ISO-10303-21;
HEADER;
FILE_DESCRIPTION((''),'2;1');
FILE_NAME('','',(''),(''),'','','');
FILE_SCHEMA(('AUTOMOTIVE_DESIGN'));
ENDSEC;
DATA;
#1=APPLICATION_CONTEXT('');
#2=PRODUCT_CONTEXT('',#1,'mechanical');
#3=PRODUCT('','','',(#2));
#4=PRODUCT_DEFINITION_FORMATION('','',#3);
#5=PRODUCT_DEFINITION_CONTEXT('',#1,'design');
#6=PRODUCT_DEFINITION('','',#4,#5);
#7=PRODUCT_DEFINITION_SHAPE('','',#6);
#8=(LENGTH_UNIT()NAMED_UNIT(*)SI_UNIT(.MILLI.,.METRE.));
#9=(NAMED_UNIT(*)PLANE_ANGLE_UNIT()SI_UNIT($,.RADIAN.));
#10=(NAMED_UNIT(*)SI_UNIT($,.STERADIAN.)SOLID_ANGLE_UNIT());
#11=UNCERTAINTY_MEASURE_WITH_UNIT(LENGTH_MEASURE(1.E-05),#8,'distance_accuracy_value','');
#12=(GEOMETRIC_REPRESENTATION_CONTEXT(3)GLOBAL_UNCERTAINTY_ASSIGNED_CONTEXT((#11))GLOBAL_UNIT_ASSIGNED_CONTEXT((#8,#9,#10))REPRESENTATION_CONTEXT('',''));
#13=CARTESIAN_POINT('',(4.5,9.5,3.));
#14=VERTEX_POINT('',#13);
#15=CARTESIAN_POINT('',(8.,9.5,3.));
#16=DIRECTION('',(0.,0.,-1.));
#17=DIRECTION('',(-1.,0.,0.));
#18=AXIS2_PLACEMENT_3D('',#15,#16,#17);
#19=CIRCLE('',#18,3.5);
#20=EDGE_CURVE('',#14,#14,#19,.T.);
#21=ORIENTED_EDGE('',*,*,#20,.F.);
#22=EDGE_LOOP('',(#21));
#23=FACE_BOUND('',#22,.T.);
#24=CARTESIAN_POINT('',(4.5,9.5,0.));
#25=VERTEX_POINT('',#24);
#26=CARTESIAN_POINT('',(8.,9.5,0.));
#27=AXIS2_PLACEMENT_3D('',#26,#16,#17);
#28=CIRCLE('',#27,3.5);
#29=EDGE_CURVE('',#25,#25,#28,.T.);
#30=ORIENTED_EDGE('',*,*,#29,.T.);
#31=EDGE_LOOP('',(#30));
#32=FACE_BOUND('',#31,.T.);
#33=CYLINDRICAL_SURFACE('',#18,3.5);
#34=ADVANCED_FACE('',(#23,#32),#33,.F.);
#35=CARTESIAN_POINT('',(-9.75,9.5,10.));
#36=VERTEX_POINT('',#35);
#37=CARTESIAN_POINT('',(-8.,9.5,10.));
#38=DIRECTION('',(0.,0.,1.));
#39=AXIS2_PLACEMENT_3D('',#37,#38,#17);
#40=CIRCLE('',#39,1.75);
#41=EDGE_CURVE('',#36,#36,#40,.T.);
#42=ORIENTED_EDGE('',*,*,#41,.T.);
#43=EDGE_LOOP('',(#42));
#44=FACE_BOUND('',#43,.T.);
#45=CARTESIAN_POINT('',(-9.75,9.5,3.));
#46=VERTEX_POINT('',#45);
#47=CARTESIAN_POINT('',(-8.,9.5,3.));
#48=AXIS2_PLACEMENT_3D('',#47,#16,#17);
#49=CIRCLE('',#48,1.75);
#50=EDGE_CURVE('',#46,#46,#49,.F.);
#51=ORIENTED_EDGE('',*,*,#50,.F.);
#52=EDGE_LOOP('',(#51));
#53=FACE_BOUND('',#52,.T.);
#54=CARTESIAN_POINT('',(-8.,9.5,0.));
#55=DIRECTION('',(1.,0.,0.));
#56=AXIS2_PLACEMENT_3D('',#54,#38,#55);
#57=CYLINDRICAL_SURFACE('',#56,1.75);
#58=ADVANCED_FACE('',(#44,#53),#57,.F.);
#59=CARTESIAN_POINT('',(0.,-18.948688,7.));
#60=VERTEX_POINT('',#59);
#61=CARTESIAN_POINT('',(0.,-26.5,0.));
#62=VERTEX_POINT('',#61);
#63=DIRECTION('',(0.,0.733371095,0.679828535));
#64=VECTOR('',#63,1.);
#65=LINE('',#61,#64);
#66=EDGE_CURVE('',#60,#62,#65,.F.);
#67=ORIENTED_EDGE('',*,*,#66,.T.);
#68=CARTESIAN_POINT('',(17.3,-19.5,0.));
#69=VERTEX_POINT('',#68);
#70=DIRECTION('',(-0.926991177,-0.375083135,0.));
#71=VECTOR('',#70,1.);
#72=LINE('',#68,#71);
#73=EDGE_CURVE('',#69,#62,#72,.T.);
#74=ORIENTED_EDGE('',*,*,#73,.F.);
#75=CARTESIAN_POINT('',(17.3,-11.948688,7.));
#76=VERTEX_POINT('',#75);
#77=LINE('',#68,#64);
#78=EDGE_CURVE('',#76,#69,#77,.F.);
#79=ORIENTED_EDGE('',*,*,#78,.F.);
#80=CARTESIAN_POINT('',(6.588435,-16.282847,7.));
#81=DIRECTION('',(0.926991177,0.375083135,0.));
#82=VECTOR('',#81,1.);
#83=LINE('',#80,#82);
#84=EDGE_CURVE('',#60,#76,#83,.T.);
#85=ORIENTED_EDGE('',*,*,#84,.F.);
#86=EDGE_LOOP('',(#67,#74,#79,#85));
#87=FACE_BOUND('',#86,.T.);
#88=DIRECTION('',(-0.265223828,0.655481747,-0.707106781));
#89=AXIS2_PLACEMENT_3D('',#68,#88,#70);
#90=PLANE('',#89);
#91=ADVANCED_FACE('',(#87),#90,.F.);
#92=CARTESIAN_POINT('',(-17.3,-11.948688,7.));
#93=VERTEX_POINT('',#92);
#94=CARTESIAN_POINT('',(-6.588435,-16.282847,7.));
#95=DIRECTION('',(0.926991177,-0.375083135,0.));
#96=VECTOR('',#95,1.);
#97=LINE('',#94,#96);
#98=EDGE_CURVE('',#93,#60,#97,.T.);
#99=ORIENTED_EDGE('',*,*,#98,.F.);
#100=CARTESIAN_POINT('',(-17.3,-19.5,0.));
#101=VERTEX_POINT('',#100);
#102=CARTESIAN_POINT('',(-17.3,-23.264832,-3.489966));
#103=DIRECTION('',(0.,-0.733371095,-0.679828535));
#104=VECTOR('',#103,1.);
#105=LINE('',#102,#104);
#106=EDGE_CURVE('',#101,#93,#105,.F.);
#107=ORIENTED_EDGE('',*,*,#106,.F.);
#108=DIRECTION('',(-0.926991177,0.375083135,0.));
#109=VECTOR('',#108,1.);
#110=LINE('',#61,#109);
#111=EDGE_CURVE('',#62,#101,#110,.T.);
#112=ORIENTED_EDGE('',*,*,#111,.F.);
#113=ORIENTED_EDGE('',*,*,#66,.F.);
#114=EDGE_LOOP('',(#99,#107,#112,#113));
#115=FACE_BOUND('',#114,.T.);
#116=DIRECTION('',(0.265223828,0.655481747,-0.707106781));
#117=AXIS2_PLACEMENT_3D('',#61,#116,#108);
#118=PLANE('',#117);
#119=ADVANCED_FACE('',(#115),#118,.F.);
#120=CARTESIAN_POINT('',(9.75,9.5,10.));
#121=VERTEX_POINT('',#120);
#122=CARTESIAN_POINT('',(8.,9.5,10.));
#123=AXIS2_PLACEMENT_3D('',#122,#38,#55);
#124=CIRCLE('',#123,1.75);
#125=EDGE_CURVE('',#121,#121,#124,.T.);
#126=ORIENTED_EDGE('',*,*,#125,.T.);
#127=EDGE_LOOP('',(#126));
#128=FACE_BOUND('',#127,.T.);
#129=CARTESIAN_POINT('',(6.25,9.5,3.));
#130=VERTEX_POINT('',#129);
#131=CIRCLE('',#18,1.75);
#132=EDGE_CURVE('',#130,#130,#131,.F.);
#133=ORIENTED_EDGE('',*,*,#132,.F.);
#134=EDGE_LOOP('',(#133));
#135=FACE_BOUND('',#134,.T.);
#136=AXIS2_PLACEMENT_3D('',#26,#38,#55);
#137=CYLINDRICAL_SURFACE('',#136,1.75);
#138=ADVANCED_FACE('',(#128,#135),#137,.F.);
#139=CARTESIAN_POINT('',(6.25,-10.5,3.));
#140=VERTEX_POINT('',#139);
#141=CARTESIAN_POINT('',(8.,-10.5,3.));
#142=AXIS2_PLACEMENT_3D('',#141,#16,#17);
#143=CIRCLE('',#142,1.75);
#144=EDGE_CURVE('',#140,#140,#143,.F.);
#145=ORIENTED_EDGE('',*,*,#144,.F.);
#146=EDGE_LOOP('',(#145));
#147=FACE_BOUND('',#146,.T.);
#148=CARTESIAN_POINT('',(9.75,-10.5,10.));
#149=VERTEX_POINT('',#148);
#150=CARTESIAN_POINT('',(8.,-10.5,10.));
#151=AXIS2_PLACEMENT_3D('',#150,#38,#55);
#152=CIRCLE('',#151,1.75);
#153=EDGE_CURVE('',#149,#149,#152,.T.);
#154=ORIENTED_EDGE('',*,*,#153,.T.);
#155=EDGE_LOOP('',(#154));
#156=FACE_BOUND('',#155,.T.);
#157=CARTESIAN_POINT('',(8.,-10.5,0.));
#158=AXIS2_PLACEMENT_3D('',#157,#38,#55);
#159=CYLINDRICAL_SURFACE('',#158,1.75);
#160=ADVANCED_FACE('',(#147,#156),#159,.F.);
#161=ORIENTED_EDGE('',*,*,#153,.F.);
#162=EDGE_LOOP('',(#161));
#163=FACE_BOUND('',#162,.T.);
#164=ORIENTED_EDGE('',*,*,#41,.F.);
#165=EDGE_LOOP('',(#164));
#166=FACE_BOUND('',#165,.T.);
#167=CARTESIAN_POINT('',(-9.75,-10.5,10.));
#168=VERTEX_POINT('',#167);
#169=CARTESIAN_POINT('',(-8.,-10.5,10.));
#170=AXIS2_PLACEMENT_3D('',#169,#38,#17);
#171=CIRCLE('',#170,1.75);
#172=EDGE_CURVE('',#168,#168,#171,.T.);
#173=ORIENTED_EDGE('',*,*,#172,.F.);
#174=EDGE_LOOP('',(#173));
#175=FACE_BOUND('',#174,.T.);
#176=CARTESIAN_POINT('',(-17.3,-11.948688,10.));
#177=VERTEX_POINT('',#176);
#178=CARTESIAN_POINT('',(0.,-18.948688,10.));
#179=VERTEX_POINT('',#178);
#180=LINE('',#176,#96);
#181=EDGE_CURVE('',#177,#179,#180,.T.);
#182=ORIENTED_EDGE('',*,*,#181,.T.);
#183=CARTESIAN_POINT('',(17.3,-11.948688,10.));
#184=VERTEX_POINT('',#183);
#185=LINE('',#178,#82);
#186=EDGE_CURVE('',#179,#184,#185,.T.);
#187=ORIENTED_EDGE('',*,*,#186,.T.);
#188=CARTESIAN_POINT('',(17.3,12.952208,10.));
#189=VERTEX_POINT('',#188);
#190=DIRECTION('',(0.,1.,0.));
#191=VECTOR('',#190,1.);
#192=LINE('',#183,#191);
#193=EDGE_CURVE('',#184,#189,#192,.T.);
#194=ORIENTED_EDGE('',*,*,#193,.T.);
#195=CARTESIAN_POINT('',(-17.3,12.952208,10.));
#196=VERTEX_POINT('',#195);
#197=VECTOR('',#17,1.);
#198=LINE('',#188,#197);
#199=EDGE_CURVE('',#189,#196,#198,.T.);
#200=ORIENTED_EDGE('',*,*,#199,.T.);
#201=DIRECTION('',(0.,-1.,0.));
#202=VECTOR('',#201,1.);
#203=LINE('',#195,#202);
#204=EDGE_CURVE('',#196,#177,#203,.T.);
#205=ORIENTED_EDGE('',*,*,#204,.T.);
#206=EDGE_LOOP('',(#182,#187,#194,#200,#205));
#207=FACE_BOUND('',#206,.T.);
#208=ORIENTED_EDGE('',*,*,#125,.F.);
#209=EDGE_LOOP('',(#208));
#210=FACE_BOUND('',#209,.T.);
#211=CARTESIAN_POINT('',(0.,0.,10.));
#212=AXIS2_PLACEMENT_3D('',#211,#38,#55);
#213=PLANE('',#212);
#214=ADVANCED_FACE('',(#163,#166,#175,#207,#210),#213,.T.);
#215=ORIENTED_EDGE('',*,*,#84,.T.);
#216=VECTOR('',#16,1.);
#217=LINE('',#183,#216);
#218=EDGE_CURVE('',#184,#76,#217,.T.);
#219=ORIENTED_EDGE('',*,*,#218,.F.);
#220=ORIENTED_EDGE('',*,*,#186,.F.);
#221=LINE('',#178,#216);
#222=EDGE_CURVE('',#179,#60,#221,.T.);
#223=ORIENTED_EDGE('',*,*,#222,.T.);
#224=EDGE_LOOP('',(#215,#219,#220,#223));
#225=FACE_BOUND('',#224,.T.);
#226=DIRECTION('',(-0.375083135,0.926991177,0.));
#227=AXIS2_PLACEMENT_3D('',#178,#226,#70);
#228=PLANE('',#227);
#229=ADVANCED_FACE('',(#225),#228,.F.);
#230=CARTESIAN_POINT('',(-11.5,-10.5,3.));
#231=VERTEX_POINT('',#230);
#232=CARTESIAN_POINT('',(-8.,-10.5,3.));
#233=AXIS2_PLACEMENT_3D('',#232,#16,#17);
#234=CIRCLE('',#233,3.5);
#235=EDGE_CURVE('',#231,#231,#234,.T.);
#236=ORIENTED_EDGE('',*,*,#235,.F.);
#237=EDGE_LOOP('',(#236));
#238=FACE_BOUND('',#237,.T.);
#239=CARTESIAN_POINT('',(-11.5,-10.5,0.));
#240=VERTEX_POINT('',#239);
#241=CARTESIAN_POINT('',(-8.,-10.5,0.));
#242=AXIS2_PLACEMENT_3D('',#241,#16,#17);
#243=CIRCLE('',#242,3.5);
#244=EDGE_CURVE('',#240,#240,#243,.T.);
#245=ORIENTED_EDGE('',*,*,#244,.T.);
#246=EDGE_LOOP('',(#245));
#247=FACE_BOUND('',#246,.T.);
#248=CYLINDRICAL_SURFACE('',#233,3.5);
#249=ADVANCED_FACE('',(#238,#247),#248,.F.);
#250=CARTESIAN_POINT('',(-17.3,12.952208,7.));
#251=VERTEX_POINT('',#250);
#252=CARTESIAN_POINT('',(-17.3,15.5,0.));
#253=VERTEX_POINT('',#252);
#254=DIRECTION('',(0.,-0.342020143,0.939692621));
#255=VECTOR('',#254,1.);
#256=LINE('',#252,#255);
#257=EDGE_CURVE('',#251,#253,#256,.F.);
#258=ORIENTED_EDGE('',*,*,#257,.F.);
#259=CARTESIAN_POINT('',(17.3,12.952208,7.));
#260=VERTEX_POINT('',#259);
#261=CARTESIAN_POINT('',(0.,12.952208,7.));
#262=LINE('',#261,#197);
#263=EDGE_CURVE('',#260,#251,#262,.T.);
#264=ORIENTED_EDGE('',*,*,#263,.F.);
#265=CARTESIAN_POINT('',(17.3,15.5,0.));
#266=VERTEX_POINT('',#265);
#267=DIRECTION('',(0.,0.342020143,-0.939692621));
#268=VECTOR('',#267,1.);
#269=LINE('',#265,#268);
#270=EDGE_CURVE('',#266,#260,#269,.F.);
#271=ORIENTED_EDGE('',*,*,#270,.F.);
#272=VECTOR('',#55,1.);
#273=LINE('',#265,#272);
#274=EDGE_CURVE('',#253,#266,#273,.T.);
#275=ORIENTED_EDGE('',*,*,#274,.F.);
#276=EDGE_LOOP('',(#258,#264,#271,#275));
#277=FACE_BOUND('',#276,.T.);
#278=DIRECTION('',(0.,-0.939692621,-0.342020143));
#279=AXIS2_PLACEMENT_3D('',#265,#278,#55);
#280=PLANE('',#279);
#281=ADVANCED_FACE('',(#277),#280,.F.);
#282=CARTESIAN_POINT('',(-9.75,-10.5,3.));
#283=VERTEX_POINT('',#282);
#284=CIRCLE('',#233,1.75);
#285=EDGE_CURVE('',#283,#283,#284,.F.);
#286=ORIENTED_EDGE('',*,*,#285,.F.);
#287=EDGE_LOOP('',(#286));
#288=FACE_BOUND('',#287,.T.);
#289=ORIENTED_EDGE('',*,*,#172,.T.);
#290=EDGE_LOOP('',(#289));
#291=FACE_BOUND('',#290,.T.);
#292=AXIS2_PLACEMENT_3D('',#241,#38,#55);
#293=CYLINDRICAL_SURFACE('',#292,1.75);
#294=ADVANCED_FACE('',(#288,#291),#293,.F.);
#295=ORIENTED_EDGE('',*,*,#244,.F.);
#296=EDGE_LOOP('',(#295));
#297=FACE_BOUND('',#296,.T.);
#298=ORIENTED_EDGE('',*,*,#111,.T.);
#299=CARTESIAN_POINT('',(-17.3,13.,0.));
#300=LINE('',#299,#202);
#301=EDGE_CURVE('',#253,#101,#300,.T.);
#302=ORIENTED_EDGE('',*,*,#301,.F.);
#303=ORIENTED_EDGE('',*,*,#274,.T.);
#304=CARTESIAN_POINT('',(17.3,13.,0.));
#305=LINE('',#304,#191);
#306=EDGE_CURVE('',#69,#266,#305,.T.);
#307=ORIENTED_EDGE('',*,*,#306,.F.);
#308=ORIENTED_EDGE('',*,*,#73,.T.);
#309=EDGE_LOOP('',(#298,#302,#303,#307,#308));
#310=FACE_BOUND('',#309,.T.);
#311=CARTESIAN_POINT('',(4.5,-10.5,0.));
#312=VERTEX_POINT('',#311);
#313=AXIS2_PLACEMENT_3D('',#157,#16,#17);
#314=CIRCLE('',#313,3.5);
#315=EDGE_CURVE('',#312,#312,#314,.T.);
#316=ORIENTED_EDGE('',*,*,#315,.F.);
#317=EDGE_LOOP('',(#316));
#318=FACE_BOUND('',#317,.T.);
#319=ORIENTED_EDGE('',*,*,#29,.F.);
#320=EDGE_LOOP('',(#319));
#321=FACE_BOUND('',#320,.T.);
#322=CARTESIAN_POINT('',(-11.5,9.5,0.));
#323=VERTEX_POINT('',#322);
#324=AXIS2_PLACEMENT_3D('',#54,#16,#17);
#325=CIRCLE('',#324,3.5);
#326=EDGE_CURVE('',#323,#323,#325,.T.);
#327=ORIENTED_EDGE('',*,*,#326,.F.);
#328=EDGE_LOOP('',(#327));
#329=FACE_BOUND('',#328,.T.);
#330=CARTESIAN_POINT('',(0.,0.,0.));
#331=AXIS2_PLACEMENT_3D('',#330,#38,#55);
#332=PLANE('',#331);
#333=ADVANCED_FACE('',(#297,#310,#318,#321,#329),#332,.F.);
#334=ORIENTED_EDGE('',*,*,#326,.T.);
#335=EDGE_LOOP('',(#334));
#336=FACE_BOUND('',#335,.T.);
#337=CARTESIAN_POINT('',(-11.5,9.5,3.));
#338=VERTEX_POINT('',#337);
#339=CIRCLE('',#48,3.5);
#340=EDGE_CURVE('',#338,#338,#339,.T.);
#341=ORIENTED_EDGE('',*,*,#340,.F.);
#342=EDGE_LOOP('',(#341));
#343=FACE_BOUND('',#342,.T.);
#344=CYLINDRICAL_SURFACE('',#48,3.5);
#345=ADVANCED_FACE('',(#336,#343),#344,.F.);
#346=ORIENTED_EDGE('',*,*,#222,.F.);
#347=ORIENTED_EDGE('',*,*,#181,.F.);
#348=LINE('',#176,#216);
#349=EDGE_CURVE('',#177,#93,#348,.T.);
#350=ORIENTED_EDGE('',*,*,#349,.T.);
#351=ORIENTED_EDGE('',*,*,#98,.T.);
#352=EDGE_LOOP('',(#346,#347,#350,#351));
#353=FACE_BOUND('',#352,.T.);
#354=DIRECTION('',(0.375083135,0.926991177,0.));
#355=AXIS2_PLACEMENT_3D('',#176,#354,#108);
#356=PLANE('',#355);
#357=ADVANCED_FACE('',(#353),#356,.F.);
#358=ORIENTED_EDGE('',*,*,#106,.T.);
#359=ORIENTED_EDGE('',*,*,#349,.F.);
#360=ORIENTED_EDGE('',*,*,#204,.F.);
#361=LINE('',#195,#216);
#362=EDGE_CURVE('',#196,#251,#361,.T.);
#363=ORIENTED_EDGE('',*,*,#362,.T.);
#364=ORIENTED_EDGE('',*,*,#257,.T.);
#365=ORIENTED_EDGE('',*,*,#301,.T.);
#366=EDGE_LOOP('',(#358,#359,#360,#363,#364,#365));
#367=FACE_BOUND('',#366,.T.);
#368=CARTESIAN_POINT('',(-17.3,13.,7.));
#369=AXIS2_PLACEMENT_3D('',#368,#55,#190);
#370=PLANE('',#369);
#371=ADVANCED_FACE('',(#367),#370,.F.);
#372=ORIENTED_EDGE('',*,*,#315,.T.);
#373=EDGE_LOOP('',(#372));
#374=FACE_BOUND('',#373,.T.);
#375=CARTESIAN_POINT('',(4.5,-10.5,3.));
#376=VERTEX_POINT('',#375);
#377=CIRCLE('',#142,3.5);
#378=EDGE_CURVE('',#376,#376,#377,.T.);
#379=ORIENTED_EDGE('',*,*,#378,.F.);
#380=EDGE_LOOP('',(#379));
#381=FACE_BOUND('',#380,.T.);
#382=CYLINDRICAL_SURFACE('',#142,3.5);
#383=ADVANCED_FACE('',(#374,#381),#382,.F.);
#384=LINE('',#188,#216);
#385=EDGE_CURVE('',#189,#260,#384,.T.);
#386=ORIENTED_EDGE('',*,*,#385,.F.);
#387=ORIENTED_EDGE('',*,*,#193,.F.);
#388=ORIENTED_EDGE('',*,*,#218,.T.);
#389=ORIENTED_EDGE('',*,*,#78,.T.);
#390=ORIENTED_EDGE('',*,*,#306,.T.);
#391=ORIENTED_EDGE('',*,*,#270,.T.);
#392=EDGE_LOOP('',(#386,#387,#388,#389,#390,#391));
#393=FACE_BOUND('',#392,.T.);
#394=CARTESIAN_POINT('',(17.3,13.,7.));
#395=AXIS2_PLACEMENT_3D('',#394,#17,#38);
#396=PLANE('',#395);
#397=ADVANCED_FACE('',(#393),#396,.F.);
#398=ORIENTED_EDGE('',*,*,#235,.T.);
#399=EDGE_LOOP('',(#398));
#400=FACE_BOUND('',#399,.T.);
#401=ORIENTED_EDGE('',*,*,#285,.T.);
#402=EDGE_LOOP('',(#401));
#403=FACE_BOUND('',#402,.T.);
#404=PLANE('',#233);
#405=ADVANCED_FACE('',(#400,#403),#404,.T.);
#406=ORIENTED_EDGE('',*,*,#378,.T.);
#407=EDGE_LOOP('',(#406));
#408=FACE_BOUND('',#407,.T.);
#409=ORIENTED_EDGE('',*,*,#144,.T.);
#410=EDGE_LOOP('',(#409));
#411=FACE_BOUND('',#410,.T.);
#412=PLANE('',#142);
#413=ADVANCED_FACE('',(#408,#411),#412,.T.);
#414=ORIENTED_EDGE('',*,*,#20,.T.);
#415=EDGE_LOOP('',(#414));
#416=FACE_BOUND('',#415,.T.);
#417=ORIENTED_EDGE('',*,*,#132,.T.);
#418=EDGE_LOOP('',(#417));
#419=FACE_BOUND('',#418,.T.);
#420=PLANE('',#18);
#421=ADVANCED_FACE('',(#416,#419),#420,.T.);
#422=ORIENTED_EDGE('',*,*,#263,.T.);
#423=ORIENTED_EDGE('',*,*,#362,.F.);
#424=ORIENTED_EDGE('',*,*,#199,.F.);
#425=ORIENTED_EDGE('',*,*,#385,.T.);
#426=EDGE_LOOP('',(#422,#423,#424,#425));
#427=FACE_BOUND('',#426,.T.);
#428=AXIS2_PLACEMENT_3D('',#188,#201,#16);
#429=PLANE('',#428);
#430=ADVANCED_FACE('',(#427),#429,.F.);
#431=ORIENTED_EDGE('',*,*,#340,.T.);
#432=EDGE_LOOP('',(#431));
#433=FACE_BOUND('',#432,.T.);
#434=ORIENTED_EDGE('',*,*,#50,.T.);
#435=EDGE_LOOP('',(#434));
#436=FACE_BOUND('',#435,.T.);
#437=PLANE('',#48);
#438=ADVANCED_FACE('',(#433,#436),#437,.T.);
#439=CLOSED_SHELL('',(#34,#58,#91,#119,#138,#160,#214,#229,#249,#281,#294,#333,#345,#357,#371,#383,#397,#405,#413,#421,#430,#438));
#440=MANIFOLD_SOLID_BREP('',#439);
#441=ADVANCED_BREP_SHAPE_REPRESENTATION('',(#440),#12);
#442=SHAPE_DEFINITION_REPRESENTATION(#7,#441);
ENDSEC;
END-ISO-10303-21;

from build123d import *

# Parameters (mm, degrees)
ESBO_O1_W                = 34.6
ESBO_O1_H                = 26
RESSALTO_EXTRUS_O1_DEPTH = 7
ESBO_O10_W               = 34.6
ESBO_O10_H               = 2.5
RESSALTO_EXTRUS_O4_DEPTH = 7
CHANFRO1_SIZE            = 7
CHANFRO2_SIZE2           = 7
CHANFRO2_SIZE            = 2.54779164
RESSALTO_EXTRUS_O5_DEPTH = 3
ESBO_O11_R               = 1.75
CORTE_EXTRUS_O1_DEPTH    = 10
ESBO_O12_R               = 3.5
CORTE_EXTRUS_O2_DEPTH    = 3


with BuildPart() as part:
    # Esboço1 → Ressalto-extrusão1 (new body)
    with BuildSketch(Plane.XY):
        Rectangle(ESBO_O1_W, ESBO_O1_H)
    extrude(amount=RESSALTO_EXTRUS_O1_DEPTH)

    # Esboço10 → Ressalto-extrusão4 (add)
    with BuildSketch(Plane(origin=(0, 0, 0), x_dir=(-1, 0, 0), z_dir=(0, 0, -1))):
        Polygon((-17.3, -19.5), (0, -26.5), (17.3, -19.5), (17.3, -13), (-17.3, -13), align=None)
        with Locations((0, 14.25)):
            Rectangle(ESBO_O10_W, ESBO_O10_H)
    extrude(amount=-RESSALTO_EXTRUS_O4_DEPTH)

    # Chanfro1
    chanfro1_edges = [part.edges().sort_by_distance(p)[0] for p in [
        (8.65, -23, 7),
        (-8.65, -23, 7),
    ]]
    chamfer(chanfro1_edges, length=CHANFRO1_SIZE - 0.0001)  # a hair under: the kernel refuses the full size

    # Chanfro2
    chanfro2_edges = [part.edges().sort_by_distance(p)[0] for p in [
        (0, 15.5, 7),
    ]]
    chanfro2_side = [part.faces().sort_by_distance(p)[0] for p in [
        (0, 15.449044167, 7),
    ]]
    chamfer(chanfro2_edges, length=CHANFRO2_SIZE - 0.0001, length2=CHANFRO2_SIZE2 - 0.0001, reference=chanfro2_side[0])  # a hair under: the kernel refuses the full size

    # Esboço13 → Ressalto-extrusão5 (add)
    with BuildSketch(Plane.XY.offset(7)):
        Polygon((17.3, -11.948687565), (17.3, 12.95220836), (-17.3, 12.95220836), (-17.3, -11.948687565), (0, -18.948687565), align=None)
    extrude(amount=RESSALTO_EXTRUS_O5_DEPTH)

    # Esboço11 → Corte-extrusão1 (cut)
    with BuildSketch(Plane.XY.offset(10)):
        with Locations((8, 9.5)):
            Circle(ESBO_O11_R)
        with Locations((8, -10.5)):
            Circle(ESBO_O11_R)
        with Locations(Location((-8, -10.5, 0), (0, 0, 180))):
            Circle(ESBO_O11_R)
        with Locations(Location((-8, 9.5, 0), (0, 0, 180))):
            Circle(ESBO_O11_R)
    extrude(amount=-CORTE_EXTRUS_O1_DEPTH, mode=Mode.SUBTRACT)

    # Esboço12 → Corte-extrusão2 (cut)
    with BuildSketch(Plane(origin=(0, 0, 0), x_dir=(-1, 0, 0), z_dir=(0, 0, -1))):
        with Locations((-8, 9.5)):
            Circle(ESBO_O12_R)
        with Locations((8, 9.5)):
            Circle(ESBO_O12_R)
        with Locations((-8, -10.5)):
            Circle(ESBO_O12_R)
        with Locations((8, -10.5)):
            Circle(ESBO_O12_R)
    extrude(amount=-CORTE_EXTRUS_O2_DEPTH, mode=Mode.SUBTRACT)


solid = part.part
